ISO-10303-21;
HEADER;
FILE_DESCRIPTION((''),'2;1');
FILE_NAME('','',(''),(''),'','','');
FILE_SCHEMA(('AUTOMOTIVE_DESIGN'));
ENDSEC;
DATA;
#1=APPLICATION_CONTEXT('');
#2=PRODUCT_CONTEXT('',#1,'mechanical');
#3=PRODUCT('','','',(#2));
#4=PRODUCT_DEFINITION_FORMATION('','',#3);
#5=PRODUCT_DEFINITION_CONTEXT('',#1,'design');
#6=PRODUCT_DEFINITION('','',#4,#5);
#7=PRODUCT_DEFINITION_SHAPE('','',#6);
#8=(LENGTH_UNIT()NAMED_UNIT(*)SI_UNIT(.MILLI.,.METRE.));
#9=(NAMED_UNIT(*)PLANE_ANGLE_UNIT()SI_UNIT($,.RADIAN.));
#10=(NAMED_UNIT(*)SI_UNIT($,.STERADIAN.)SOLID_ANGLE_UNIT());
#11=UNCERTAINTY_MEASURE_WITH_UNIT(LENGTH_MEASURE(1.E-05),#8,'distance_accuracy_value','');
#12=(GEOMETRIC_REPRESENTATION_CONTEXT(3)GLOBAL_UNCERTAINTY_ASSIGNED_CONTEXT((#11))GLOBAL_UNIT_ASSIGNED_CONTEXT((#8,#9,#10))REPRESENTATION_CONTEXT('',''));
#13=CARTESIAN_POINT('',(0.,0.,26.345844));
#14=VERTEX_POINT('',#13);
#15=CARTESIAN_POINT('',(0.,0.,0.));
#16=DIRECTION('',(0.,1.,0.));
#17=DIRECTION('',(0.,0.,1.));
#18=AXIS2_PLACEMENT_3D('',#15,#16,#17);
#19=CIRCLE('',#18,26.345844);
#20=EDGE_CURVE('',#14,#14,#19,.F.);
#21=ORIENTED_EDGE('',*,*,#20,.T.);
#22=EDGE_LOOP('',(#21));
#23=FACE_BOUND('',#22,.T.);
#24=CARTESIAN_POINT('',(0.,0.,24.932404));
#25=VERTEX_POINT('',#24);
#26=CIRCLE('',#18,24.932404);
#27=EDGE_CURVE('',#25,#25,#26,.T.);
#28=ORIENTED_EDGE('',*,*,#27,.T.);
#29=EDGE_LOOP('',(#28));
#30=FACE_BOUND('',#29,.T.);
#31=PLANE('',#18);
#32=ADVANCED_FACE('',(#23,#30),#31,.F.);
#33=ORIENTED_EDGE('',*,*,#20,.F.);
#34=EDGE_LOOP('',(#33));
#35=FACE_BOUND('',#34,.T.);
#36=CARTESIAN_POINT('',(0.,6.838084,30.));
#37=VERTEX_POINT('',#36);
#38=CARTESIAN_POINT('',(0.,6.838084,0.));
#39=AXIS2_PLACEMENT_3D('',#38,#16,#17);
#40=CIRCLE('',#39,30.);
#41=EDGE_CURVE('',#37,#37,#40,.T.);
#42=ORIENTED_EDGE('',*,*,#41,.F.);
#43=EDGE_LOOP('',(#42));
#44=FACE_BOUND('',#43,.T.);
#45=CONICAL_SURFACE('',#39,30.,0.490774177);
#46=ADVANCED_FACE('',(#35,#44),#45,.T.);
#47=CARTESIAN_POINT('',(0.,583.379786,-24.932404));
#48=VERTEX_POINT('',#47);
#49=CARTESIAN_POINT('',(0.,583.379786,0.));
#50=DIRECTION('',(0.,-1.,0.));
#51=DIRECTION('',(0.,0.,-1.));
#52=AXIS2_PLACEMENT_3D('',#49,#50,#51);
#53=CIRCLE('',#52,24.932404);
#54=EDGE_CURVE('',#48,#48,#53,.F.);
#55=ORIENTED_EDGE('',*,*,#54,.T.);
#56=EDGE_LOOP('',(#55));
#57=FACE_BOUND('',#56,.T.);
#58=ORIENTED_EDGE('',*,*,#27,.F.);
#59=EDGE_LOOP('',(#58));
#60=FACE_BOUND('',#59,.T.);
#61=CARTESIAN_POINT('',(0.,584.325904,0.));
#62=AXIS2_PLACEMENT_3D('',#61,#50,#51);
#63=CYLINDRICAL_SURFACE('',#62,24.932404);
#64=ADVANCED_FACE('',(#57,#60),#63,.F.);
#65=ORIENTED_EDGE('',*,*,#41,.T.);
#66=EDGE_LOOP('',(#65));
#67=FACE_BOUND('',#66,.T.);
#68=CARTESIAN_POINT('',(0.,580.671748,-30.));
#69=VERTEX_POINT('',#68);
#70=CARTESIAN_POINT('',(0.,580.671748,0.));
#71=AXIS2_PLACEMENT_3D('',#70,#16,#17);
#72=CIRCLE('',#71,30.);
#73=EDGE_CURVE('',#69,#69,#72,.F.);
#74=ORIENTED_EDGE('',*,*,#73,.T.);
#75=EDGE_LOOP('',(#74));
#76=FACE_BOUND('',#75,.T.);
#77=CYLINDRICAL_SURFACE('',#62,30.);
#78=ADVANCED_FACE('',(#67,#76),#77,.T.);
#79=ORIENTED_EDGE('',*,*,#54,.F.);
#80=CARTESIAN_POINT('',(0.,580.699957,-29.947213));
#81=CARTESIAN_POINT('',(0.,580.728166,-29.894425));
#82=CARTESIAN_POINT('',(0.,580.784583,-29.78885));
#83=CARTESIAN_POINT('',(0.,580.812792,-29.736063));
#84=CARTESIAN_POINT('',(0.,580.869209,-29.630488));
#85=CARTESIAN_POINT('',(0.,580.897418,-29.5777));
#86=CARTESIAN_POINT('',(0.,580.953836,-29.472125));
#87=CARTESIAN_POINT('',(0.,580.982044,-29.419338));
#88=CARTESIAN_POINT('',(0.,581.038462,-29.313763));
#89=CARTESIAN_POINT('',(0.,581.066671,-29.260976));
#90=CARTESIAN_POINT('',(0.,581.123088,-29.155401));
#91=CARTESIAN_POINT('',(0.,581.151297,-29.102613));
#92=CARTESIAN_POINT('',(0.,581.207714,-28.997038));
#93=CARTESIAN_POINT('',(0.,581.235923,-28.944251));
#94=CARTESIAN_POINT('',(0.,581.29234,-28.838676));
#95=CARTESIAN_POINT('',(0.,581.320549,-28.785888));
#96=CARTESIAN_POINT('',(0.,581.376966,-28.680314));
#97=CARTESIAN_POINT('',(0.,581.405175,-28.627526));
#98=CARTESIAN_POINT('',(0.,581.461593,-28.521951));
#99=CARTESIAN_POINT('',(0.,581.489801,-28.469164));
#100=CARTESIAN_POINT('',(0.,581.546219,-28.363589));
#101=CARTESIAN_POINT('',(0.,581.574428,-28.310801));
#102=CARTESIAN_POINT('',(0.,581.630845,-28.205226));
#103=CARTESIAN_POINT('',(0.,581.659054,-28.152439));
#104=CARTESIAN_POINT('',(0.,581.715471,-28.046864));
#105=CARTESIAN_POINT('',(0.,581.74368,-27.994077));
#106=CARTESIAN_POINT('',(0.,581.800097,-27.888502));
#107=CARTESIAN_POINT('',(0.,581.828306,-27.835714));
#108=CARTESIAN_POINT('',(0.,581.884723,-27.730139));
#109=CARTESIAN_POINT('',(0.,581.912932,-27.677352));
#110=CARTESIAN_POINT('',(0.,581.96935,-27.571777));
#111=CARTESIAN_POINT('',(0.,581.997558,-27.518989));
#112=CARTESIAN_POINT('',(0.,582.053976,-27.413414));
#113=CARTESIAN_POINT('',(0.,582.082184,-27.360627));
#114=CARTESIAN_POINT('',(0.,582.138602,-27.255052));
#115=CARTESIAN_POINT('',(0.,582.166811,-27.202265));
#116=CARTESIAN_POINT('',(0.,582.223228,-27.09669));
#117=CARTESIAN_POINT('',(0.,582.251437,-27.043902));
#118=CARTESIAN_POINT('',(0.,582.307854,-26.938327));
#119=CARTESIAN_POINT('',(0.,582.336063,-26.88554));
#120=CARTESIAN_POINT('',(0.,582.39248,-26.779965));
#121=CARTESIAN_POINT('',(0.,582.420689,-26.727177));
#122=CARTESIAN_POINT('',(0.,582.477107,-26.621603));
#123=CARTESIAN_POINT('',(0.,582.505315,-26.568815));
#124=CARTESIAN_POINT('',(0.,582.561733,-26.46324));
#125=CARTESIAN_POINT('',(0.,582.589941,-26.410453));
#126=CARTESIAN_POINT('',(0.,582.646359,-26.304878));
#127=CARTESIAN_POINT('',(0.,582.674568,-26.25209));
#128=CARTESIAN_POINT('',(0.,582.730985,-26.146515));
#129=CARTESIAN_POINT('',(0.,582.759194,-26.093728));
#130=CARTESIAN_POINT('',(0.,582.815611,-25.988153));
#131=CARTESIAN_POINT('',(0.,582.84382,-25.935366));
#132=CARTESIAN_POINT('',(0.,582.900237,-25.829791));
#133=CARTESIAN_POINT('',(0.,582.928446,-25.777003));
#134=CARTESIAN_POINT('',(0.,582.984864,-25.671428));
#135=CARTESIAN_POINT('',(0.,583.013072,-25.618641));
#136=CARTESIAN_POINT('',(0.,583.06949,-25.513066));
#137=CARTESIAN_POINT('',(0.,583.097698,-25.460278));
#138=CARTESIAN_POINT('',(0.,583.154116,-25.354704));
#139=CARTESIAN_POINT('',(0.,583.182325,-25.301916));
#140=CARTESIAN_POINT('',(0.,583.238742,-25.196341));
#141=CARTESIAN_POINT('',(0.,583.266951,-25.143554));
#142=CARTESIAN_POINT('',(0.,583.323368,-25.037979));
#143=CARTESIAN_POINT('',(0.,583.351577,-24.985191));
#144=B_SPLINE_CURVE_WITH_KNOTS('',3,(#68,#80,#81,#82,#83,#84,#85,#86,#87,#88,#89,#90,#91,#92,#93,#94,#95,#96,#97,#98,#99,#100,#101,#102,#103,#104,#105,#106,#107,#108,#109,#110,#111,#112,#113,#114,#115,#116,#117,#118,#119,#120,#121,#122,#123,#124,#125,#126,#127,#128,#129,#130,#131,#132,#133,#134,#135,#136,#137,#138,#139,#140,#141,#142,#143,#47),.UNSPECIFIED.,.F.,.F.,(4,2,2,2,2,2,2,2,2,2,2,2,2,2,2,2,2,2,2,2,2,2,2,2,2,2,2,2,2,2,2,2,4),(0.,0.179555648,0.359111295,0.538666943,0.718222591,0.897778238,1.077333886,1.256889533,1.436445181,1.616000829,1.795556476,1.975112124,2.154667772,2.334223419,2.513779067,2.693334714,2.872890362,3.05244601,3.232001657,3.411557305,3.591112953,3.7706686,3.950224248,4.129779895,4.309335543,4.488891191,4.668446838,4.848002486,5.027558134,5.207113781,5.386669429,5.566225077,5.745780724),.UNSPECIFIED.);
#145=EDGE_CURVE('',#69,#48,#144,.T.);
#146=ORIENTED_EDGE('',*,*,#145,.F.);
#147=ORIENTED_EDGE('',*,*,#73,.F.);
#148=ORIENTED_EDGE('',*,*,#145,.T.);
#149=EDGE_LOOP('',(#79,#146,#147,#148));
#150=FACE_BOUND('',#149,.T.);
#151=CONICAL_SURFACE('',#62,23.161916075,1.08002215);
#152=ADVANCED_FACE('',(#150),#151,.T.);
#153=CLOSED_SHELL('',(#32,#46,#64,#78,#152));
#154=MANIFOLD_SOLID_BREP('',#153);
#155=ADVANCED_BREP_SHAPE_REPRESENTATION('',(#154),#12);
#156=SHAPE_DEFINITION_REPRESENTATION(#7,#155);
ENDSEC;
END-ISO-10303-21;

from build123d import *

# Parameters (mm, degrees)
SKETCH1_R           = 30
BOSS_EXTRUDE1_DEPTH = 584.325904
SKETCH2_R           = 24.932403849
CUT_EXTRUDE1_DEPTH  = 586.864115717
CHAMFER1_SIZE       = 3.654156
CHAMFER1_SIZE_2     = 6.838084


with BuildPart() as part:
    # Sketch1 → Boss-Extrude1 (new body)
    with BuildSketch(Plane(origin=(0, 0, 0), x_dir=(1, 0, 0), z_dir=(0, 1, 0))):
        with Locations(Location((0, 0, 0), (0, 0, 270))):
            Circle(SKETCH1_R)
    extrude(amount=BOSS_EXTRUDE1_DEPTH)

    # Sketch2 → Cut-Extrude1 (cut, through all)
    with BuildSketch(Plane(origin=(0, 0, 0), x_dir=(1, 0, 0), z_dir=(0, 1, 0))):
        with Locations(Location((0, 0, 0), (0, 0, 270))):
            Circle(SKETCH2_R)
    extrude(amount=CUT_EXTRUDE1_DEPTH, mode=Mode.SUBTRACT)

    # Chamfer1
    # the kernel refuses this chamfer: 6.838084, 3.654156 mm, written as the material it takes off along each edge
    with BuildSketch(Plane(origin=(0, 584.325904, 0), x_dir=(0, 0, 1), z_dir=(-1, 0, 0))) as chamfer1_piece_1:
        Polygon((30, -CHAMFER1_SIZE), (30 - CHAMFER1_SIZE_2, 0), (30, 0), align=None)
    revolve(axis=Axis((0, 584.325904, 0), (0, 1, 0)), mode=Mode.SUBTRACT)
    with BuildSketch(Plane(origin=(0, 0, 0), x_dir=(0, 0, 1), z_dir=(-1, 0, 0))) as chamfer1_piece_2:
        Polygon((30, CHAMFER1_SIZE_2), (30 - CHAMFER1_SIZE, 0), (30, 0), align=None)
    revolve(axis=Axis((0, 0, 0), (0, 1, 0)), mode=Mode.SUBTRACT)


solid = part.part
